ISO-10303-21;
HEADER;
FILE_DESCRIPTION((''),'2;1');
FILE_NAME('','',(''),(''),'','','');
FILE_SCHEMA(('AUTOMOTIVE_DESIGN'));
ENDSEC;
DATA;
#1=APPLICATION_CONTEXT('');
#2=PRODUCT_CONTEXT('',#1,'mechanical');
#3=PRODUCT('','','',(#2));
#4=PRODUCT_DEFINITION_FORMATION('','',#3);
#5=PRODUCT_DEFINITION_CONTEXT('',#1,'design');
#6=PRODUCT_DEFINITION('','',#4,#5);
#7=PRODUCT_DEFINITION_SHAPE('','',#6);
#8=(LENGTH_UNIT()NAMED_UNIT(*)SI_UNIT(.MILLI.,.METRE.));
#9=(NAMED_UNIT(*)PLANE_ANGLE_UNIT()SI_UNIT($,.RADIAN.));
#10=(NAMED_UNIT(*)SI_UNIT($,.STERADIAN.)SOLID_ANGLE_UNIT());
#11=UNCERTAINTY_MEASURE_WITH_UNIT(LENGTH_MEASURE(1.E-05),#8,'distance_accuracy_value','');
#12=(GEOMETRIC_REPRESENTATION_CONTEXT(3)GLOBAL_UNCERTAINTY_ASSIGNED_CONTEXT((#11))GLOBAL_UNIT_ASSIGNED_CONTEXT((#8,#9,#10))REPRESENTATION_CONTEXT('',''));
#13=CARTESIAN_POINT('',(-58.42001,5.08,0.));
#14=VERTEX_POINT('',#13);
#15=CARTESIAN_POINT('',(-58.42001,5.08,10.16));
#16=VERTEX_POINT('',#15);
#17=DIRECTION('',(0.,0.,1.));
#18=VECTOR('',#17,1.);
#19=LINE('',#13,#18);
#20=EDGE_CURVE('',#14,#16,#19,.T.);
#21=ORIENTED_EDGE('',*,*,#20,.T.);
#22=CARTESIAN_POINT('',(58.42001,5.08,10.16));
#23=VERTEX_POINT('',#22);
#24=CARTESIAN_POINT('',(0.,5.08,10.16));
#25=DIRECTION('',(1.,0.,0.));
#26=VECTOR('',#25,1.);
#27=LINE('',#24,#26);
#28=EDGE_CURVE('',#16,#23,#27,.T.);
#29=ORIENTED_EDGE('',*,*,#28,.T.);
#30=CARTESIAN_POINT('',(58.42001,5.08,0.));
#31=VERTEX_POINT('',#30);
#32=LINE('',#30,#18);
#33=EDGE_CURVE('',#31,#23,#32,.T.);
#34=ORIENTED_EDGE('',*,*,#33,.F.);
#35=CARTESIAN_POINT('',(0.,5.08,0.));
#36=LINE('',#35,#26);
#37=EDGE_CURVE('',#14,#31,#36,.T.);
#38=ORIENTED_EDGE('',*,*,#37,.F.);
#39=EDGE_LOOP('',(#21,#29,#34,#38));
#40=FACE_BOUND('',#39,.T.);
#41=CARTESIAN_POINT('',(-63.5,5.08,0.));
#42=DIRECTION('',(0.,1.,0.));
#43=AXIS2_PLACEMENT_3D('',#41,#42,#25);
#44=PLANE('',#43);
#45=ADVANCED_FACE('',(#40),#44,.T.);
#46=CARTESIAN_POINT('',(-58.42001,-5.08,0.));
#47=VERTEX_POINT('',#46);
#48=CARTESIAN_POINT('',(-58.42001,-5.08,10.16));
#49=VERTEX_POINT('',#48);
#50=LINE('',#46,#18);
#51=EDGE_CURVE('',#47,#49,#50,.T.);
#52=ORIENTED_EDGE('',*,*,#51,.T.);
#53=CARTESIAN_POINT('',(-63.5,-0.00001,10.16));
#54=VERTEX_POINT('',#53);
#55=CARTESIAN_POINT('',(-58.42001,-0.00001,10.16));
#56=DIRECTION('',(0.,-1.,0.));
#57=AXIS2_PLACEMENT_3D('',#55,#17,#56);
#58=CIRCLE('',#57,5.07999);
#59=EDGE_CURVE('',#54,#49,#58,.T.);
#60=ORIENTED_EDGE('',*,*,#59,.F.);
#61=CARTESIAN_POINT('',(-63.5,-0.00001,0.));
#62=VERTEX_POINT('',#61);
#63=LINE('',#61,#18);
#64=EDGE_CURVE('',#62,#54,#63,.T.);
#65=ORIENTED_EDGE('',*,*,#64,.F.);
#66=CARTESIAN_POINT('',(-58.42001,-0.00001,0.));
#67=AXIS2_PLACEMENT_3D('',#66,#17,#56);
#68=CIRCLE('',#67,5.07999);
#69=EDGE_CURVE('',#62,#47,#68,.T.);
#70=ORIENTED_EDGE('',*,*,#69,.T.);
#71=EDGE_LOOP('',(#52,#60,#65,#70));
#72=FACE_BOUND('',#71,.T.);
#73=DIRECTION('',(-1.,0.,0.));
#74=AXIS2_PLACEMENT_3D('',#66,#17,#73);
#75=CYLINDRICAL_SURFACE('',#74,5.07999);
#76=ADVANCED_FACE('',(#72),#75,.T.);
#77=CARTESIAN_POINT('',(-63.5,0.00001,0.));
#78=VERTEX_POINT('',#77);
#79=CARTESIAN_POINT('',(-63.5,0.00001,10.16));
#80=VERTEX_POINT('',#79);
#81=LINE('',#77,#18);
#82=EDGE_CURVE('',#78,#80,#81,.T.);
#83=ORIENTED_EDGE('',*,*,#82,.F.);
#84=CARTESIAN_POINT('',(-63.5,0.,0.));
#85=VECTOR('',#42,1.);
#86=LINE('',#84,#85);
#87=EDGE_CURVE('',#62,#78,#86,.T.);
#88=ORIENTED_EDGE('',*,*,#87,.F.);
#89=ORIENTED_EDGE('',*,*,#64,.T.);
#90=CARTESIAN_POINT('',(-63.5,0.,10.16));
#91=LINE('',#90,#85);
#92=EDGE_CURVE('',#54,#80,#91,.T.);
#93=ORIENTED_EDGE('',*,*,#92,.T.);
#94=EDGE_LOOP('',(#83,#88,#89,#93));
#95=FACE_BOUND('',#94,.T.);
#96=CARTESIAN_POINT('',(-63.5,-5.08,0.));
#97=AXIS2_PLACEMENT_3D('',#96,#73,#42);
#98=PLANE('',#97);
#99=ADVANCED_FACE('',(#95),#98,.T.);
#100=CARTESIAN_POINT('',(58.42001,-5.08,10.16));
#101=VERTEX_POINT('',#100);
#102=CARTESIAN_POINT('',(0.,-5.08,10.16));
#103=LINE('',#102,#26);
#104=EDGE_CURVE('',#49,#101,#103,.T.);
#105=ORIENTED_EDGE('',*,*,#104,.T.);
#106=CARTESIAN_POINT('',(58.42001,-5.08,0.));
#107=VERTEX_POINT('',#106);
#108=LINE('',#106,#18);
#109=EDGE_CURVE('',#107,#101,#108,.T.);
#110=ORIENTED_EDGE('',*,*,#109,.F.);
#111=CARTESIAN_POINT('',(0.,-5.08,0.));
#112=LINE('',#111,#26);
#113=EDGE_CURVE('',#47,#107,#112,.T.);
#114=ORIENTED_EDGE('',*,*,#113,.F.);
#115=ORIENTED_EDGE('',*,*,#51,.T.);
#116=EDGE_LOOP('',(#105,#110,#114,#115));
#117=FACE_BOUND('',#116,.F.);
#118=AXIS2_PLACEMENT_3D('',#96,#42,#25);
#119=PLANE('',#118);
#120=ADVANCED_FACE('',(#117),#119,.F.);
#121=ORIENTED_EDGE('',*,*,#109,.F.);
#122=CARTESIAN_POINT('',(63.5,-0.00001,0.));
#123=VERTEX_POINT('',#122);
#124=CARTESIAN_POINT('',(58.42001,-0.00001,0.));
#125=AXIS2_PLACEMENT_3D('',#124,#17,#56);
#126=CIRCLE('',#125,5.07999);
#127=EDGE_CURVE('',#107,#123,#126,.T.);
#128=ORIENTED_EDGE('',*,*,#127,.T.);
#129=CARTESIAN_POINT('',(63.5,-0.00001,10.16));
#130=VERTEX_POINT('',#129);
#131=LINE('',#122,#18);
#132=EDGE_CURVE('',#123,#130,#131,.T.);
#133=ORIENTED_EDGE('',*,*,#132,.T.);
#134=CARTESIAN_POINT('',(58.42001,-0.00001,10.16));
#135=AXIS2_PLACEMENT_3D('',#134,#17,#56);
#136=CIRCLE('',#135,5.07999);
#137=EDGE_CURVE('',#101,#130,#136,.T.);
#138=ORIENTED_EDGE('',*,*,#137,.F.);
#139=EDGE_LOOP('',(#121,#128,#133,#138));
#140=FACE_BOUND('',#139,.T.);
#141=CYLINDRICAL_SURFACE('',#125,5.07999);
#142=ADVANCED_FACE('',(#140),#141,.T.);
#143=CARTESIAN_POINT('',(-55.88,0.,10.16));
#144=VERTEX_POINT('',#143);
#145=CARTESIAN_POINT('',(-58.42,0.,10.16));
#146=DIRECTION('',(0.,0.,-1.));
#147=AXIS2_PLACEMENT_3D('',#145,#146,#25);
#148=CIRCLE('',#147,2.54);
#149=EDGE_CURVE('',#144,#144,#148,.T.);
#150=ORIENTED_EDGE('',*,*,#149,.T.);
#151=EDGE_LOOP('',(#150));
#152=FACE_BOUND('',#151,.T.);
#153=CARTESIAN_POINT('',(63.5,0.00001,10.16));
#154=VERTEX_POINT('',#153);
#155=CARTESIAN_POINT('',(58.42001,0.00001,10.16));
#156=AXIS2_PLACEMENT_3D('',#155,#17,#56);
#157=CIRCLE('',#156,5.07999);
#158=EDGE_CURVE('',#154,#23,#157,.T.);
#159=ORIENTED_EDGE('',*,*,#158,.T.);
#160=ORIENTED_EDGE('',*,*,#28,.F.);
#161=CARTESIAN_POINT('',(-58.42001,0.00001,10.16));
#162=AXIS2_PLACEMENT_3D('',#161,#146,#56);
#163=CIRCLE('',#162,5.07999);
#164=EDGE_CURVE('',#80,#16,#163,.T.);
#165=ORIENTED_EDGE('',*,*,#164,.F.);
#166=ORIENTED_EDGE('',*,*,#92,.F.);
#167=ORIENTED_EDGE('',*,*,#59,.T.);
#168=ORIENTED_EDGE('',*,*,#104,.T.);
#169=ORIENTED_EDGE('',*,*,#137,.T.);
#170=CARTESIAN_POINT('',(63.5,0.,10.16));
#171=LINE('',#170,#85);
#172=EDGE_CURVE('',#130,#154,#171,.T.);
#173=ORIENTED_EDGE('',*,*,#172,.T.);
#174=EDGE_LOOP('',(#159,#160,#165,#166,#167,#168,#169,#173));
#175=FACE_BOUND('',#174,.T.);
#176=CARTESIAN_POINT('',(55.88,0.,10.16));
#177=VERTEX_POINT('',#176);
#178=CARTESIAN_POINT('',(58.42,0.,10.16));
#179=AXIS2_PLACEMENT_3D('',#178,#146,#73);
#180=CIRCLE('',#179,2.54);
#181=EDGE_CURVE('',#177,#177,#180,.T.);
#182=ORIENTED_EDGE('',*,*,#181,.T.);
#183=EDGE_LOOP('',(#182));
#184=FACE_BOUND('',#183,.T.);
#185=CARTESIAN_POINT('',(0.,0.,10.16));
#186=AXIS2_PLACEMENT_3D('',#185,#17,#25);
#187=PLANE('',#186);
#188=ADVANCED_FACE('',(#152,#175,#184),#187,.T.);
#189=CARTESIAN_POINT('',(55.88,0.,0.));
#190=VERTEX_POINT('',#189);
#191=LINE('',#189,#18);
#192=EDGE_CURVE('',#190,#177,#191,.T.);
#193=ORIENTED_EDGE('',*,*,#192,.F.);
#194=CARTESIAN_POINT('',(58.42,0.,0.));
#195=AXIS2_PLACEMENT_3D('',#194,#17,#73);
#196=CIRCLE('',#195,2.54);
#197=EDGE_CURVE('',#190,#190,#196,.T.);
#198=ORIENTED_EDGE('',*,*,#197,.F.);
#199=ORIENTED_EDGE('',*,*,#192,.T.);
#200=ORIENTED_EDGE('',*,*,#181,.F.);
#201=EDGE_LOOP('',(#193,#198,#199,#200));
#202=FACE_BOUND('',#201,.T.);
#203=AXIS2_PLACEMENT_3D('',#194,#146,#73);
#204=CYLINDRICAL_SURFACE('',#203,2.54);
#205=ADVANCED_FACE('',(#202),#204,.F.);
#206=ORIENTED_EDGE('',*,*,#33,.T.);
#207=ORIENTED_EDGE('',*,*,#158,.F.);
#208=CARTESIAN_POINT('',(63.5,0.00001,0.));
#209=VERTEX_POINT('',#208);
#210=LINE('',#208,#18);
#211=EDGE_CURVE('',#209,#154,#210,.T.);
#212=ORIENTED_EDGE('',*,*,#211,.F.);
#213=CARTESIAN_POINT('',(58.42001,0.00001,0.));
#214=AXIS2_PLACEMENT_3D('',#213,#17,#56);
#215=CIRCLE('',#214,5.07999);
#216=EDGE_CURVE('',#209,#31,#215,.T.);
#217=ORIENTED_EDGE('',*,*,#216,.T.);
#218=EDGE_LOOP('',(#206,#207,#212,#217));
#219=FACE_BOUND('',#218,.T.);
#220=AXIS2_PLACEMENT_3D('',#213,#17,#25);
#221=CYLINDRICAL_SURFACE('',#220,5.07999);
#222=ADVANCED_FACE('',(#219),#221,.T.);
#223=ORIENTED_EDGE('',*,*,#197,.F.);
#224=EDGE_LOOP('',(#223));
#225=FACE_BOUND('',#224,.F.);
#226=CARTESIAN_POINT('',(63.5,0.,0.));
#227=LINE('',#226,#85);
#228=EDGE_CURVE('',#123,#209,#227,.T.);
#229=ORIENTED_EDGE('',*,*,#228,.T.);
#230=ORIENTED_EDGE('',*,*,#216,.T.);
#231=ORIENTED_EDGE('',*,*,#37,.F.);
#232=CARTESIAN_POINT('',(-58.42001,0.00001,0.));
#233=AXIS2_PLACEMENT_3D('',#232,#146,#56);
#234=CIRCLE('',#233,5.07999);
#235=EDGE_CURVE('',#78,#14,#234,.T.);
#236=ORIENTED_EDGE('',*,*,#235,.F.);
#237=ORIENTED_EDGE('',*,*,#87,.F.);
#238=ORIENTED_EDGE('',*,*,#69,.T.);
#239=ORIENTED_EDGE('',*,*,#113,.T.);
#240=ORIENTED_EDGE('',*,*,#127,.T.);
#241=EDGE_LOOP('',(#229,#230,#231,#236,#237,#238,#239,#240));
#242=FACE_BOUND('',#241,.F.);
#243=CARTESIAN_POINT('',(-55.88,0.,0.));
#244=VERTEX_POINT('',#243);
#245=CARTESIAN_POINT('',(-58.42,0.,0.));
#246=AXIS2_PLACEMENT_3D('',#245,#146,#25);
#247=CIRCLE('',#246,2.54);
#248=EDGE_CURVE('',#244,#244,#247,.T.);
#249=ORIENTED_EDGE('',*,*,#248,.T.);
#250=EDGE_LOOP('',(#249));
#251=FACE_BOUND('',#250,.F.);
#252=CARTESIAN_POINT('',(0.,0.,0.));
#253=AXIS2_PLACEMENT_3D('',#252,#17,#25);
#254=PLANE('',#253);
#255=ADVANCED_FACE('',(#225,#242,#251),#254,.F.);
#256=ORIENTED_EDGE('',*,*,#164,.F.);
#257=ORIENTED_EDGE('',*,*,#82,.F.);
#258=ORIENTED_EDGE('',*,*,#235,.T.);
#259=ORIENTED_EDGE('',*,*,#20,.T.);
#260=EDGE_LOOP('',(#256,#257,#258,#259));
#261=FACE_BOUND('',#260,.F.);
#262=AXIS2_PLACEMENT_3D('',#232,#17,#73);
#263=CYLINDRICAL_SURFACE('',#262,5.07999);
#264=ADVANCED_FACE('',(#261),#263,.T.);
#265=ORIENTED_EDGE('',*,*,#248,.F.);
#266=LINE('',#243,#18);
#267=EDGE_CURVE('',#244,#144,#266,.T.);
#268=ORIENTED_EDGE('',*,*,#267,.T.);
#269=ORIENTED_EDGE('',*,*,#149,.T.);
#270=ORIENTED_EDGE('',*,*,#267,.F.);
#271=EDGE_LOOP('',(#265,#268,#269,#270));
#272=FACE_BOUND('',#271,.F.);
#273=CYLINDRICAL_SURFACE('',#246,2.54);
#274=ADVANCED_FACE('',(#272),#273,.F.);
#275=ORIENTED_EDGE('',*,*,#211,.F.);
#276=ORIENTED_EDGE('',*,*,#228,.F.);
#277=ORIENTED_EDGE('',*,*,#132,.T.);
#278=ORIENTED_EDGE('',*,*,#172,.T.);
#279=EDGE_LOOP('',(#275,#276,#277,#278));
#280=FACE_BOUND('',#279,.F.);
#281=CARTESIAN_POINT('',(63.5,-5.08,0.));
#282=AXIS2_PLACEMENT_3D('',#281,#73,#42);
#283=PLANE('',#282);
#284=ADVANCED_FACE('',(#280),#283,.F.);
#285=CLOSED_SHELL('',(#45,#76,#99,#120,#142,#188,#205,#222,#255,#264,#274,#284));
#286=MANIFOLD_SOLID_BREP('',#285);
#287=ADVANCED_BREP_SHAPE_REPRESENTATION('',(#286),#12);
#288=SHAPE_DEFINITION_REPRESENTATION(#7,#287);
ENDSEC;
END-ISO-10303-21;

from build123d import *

# Parameters (mm, degrees)
F0_W     = 127
F0_H     = 10.16
F1_DEPTH = 10.16
F2_R     = 5.07999
F3_R     = 2.54
F4_DEPTH = 25.4


# Not quite as in the source:
# - a fillet or chamfer is up to 0.001 mm smaller than in the source, because OpenCascade refuses the exact size
# - a pattern or mirror of a feature is missing from the dataset's text; its kind, count and spacing are read off the source's solid


with BuildPart() as f1:
    # F0 (on Top) → F1 (new body)
    with BuildSketch(Plane.XY):
        Rectangle(F0_W, F0_H)
    extrude(amount=F1_DEPTH)

    # F2 (radius 5.08 in the source; OpenCascade refuses exactly that, so slightly less here)
    f2_edges = [f1.edges().sort_by_distance(p)[0] for p in [
        (-63.5, -5.08, 5.08),
        (-63.5, 5.08, 5.08),
        (63.5, -5.08, 5.08),
        (63.5, 5.08, 5.08),
    ]]
    fillet(f2_edges, radius=F2_R)

    # F3 (on face) → F4 (cut)
    with BuildSketch(Plane(origin=(0, 0, 0), x_dir=(1, 0, 0), z_dir=(0, 0, -1))):
        with Locations((-58.42, 0)):
            Circle(F3_R)
    f4 = extrude(amount=-F4_DEPTH, mode=Mode.SUBTRACT)

    # F4_copies: F4 across plane
    add(f4.mirror(Plane(origin=(0, 0, 0), x_dir=(0, 0, 1), z_dir=(1, 0, 0))), mode=Mode.SUBTRACT)


solid = f1.part
